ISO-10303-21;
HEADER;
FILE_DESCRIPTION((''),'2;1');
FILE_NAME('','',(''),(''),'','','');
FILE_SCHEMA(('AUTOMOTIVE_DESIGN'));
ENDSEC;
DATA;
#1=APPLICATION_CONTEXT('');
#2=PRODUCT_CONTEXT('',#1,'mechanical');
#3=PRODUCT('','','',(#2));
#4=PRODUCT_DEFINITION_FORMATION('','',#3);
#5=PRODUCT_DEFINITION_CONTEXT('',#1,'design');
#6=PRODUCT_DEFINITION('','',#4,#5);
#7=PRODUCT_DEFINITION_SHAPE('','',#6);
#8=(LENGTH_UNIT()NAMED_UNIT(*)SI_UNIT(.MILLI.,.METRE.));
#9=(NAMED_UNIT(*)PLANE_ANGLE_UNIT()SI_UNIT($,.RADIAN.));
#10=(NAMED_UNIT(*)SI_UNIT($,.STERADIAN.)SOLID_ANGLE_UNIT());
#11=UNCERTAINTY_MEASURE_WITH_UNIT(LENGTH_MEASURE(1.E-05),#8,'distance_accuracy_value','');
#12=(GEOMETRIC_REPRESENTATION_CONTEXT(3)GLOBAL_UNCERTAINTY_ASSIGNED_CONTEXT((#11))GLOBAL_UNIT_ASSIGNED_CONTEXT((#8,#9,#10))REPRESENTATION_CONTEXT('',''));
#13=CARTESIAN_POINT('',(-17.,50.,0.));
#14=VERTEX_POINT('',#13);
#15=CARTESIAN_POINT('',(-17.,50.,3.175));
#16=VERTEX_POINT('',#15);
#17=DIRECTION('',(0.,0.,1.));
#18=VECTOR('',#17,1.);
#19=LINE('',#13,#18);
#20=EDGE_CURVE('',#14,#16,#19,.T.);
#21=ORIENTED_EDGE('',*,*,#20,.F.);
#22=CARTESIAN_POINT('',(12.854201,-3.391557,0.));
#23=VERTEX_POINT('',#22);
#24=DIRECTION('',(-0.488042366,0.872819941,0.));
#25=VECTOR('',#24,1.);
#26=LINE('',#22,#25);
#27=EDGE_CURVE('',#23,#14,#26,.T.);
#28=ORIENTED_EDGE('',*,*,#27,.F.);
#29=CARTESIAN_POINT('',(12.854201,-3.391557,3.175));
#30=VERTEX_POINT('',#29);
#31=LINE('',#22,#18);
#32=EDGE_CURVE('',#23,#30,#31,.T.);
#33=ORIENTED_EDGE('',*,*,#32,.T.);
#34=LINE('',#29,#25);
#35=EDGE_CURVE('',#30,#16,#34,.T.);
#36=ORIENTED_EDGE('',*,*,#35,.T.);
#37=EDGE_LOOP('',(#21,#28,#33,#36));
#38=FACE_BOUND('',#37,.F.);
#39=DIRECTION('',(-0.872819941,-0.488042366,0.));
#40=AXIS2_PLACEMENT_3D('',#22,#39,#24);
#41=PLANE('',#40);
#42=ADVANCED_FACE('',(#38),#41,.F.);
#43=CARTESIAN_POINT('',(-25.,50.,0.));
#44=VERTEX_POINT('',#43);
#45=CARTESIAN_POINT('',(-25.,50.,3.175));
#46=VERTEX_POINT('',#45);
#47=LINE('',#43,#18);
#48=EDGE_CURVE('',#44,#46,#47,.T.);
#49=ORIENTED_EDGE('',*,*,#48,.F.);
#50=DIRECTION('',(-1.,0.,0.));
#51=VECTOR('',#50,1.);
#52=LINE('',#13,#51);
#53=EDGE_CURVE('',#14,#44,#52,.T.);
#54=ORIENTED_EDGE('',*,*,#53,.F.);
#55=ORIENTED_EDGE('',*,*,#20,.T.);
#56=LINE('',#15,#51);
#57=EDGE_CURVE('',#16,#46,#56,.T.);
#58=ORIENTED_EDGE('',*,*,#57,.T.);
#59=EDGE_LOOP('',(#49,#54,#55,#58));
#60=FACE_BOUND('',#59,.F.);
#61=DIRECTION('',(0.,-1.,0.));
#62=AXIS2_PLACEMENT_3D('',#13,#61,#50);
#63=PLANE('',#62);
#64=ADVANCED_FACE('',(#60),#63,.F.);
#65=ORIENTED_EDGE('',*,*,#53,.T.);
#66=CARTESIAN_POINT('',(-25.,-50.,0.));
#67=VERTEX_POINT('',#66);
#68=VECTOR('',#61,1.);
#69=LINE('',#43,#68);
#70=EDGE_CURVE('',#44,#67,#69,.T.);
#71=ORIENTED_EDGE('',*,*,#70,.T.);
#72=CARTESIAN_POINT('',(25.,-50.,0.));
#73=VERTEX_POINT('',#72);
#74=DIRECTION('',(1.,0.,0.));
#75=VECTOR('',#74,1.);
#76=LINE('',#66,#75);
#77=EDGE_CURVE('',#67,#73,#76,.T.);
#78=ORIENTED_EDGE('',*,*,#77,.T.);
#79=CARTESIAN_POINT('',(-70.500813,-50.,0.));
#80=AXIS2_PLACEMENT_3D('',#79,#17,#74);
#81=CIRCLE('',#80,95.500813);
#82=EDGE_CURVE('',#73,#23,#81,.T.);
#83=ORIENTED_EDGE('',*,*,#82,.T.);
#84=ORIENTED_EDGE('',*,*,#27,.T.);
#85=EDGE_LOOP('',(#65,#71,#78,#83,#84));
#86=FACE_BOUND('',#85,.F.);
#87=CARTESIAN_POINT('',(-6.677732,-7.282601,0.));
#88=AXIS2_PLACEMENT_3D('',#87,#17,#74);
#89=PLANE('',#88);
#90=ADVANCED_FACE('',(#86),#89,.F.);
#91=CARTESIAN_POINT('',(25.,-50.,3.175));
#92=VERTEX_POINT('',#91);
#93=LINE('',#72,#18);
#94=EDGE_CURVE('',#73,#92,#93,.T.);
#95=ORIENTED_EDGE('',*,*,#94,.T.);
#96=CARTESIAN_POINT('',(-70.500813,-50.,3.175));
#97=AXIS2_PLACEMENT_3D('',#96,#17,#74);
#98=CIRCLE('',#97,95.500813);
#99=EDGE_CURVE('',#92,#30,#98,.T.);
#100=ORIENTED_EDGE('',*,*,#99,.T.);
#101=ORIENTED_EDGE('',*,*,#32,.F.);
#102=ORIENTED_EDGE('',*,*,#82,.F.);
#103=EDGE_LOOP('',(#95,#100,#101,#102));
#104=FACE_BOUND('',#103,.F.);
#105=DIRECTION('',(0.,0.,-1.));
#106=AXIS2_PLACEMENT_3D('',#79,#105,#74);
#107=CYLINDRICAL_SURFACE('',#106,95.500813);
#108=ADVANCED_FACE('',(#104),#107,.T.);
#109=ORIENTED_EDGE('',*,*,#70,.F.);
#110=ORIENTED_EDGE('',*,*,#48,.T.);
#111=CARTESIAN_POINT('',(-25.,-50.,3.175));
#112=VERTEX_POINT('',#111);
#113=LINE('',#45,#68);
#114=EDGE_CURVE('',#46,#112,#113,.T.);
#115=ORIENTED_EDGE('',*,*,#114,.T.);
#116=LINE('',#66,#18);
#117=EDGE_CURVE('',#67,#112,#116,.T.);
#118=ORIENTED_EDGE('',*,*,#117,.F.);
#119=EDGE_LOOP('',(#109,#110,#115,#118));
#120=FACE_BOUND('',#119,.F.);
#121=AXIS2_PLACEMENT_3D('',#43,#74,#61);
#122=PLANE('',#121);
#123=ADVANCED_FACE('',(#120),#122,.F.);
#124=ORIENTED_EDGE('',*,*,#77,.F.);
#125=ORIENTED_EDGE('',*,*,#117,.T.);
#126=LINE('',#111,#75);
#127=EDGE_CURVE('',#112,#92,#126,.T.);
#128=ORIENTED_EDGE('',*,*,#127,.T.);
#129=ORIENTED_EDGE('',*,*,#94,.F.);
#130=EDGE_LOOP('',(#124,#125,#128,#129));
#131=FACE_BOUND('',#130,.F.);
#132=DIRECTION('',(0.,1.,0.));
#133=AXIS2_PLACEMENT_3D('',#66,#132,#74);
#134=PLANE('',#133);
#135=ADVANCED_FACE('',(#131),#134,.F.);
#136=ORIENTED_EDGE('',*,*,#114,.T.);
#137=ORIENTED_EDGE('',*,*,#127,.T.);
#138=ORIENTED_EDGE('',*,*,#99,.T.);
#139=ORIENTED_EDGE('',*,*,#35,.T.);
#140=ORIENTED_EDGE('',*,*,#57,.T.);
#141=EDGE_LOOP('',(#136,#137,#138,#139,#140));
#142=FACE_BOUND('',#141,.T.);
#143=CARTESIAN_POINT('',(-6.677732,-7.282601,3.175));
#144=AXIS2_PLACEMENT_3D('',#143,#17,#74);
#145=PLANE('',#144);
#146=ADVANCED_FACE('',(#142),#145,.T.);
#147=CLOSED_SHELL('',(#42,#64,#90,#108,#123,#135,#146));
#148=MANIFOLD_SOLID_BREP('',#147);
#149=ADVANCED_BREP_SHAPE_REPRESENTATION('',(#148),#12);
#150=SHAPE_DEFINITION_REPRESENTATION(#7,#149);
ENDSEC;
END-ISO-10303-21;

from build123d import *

# Parameters (mm, degrees)
F1_DEPTH = 3.175


# Not quite as in the source:
# - a length typed as a fraction of an inch, garbled in the dataset ("3 / 203.2 mm" for 3/8 in), is restored


with BuildPart() as f1:
    # F0 (on Top) → F1 (new body)
    with BuildSketch(Plane.XY):
        with BuildLine():
            Line((-25, -50), (25, -50))
            ThreePointArc((25, -50), (21.9136795769, -25.9174991328), (12.8542008758, -3.3915570341))
            Line((12.8542008758, -3.3915570341), (-17, 50))
            Line((-17, 50), (-25, 50))
            Line((-25, 50), (-25, -50))
        make_face()
    extrude(amount=F1_DEPTH)


solid = f1.part
